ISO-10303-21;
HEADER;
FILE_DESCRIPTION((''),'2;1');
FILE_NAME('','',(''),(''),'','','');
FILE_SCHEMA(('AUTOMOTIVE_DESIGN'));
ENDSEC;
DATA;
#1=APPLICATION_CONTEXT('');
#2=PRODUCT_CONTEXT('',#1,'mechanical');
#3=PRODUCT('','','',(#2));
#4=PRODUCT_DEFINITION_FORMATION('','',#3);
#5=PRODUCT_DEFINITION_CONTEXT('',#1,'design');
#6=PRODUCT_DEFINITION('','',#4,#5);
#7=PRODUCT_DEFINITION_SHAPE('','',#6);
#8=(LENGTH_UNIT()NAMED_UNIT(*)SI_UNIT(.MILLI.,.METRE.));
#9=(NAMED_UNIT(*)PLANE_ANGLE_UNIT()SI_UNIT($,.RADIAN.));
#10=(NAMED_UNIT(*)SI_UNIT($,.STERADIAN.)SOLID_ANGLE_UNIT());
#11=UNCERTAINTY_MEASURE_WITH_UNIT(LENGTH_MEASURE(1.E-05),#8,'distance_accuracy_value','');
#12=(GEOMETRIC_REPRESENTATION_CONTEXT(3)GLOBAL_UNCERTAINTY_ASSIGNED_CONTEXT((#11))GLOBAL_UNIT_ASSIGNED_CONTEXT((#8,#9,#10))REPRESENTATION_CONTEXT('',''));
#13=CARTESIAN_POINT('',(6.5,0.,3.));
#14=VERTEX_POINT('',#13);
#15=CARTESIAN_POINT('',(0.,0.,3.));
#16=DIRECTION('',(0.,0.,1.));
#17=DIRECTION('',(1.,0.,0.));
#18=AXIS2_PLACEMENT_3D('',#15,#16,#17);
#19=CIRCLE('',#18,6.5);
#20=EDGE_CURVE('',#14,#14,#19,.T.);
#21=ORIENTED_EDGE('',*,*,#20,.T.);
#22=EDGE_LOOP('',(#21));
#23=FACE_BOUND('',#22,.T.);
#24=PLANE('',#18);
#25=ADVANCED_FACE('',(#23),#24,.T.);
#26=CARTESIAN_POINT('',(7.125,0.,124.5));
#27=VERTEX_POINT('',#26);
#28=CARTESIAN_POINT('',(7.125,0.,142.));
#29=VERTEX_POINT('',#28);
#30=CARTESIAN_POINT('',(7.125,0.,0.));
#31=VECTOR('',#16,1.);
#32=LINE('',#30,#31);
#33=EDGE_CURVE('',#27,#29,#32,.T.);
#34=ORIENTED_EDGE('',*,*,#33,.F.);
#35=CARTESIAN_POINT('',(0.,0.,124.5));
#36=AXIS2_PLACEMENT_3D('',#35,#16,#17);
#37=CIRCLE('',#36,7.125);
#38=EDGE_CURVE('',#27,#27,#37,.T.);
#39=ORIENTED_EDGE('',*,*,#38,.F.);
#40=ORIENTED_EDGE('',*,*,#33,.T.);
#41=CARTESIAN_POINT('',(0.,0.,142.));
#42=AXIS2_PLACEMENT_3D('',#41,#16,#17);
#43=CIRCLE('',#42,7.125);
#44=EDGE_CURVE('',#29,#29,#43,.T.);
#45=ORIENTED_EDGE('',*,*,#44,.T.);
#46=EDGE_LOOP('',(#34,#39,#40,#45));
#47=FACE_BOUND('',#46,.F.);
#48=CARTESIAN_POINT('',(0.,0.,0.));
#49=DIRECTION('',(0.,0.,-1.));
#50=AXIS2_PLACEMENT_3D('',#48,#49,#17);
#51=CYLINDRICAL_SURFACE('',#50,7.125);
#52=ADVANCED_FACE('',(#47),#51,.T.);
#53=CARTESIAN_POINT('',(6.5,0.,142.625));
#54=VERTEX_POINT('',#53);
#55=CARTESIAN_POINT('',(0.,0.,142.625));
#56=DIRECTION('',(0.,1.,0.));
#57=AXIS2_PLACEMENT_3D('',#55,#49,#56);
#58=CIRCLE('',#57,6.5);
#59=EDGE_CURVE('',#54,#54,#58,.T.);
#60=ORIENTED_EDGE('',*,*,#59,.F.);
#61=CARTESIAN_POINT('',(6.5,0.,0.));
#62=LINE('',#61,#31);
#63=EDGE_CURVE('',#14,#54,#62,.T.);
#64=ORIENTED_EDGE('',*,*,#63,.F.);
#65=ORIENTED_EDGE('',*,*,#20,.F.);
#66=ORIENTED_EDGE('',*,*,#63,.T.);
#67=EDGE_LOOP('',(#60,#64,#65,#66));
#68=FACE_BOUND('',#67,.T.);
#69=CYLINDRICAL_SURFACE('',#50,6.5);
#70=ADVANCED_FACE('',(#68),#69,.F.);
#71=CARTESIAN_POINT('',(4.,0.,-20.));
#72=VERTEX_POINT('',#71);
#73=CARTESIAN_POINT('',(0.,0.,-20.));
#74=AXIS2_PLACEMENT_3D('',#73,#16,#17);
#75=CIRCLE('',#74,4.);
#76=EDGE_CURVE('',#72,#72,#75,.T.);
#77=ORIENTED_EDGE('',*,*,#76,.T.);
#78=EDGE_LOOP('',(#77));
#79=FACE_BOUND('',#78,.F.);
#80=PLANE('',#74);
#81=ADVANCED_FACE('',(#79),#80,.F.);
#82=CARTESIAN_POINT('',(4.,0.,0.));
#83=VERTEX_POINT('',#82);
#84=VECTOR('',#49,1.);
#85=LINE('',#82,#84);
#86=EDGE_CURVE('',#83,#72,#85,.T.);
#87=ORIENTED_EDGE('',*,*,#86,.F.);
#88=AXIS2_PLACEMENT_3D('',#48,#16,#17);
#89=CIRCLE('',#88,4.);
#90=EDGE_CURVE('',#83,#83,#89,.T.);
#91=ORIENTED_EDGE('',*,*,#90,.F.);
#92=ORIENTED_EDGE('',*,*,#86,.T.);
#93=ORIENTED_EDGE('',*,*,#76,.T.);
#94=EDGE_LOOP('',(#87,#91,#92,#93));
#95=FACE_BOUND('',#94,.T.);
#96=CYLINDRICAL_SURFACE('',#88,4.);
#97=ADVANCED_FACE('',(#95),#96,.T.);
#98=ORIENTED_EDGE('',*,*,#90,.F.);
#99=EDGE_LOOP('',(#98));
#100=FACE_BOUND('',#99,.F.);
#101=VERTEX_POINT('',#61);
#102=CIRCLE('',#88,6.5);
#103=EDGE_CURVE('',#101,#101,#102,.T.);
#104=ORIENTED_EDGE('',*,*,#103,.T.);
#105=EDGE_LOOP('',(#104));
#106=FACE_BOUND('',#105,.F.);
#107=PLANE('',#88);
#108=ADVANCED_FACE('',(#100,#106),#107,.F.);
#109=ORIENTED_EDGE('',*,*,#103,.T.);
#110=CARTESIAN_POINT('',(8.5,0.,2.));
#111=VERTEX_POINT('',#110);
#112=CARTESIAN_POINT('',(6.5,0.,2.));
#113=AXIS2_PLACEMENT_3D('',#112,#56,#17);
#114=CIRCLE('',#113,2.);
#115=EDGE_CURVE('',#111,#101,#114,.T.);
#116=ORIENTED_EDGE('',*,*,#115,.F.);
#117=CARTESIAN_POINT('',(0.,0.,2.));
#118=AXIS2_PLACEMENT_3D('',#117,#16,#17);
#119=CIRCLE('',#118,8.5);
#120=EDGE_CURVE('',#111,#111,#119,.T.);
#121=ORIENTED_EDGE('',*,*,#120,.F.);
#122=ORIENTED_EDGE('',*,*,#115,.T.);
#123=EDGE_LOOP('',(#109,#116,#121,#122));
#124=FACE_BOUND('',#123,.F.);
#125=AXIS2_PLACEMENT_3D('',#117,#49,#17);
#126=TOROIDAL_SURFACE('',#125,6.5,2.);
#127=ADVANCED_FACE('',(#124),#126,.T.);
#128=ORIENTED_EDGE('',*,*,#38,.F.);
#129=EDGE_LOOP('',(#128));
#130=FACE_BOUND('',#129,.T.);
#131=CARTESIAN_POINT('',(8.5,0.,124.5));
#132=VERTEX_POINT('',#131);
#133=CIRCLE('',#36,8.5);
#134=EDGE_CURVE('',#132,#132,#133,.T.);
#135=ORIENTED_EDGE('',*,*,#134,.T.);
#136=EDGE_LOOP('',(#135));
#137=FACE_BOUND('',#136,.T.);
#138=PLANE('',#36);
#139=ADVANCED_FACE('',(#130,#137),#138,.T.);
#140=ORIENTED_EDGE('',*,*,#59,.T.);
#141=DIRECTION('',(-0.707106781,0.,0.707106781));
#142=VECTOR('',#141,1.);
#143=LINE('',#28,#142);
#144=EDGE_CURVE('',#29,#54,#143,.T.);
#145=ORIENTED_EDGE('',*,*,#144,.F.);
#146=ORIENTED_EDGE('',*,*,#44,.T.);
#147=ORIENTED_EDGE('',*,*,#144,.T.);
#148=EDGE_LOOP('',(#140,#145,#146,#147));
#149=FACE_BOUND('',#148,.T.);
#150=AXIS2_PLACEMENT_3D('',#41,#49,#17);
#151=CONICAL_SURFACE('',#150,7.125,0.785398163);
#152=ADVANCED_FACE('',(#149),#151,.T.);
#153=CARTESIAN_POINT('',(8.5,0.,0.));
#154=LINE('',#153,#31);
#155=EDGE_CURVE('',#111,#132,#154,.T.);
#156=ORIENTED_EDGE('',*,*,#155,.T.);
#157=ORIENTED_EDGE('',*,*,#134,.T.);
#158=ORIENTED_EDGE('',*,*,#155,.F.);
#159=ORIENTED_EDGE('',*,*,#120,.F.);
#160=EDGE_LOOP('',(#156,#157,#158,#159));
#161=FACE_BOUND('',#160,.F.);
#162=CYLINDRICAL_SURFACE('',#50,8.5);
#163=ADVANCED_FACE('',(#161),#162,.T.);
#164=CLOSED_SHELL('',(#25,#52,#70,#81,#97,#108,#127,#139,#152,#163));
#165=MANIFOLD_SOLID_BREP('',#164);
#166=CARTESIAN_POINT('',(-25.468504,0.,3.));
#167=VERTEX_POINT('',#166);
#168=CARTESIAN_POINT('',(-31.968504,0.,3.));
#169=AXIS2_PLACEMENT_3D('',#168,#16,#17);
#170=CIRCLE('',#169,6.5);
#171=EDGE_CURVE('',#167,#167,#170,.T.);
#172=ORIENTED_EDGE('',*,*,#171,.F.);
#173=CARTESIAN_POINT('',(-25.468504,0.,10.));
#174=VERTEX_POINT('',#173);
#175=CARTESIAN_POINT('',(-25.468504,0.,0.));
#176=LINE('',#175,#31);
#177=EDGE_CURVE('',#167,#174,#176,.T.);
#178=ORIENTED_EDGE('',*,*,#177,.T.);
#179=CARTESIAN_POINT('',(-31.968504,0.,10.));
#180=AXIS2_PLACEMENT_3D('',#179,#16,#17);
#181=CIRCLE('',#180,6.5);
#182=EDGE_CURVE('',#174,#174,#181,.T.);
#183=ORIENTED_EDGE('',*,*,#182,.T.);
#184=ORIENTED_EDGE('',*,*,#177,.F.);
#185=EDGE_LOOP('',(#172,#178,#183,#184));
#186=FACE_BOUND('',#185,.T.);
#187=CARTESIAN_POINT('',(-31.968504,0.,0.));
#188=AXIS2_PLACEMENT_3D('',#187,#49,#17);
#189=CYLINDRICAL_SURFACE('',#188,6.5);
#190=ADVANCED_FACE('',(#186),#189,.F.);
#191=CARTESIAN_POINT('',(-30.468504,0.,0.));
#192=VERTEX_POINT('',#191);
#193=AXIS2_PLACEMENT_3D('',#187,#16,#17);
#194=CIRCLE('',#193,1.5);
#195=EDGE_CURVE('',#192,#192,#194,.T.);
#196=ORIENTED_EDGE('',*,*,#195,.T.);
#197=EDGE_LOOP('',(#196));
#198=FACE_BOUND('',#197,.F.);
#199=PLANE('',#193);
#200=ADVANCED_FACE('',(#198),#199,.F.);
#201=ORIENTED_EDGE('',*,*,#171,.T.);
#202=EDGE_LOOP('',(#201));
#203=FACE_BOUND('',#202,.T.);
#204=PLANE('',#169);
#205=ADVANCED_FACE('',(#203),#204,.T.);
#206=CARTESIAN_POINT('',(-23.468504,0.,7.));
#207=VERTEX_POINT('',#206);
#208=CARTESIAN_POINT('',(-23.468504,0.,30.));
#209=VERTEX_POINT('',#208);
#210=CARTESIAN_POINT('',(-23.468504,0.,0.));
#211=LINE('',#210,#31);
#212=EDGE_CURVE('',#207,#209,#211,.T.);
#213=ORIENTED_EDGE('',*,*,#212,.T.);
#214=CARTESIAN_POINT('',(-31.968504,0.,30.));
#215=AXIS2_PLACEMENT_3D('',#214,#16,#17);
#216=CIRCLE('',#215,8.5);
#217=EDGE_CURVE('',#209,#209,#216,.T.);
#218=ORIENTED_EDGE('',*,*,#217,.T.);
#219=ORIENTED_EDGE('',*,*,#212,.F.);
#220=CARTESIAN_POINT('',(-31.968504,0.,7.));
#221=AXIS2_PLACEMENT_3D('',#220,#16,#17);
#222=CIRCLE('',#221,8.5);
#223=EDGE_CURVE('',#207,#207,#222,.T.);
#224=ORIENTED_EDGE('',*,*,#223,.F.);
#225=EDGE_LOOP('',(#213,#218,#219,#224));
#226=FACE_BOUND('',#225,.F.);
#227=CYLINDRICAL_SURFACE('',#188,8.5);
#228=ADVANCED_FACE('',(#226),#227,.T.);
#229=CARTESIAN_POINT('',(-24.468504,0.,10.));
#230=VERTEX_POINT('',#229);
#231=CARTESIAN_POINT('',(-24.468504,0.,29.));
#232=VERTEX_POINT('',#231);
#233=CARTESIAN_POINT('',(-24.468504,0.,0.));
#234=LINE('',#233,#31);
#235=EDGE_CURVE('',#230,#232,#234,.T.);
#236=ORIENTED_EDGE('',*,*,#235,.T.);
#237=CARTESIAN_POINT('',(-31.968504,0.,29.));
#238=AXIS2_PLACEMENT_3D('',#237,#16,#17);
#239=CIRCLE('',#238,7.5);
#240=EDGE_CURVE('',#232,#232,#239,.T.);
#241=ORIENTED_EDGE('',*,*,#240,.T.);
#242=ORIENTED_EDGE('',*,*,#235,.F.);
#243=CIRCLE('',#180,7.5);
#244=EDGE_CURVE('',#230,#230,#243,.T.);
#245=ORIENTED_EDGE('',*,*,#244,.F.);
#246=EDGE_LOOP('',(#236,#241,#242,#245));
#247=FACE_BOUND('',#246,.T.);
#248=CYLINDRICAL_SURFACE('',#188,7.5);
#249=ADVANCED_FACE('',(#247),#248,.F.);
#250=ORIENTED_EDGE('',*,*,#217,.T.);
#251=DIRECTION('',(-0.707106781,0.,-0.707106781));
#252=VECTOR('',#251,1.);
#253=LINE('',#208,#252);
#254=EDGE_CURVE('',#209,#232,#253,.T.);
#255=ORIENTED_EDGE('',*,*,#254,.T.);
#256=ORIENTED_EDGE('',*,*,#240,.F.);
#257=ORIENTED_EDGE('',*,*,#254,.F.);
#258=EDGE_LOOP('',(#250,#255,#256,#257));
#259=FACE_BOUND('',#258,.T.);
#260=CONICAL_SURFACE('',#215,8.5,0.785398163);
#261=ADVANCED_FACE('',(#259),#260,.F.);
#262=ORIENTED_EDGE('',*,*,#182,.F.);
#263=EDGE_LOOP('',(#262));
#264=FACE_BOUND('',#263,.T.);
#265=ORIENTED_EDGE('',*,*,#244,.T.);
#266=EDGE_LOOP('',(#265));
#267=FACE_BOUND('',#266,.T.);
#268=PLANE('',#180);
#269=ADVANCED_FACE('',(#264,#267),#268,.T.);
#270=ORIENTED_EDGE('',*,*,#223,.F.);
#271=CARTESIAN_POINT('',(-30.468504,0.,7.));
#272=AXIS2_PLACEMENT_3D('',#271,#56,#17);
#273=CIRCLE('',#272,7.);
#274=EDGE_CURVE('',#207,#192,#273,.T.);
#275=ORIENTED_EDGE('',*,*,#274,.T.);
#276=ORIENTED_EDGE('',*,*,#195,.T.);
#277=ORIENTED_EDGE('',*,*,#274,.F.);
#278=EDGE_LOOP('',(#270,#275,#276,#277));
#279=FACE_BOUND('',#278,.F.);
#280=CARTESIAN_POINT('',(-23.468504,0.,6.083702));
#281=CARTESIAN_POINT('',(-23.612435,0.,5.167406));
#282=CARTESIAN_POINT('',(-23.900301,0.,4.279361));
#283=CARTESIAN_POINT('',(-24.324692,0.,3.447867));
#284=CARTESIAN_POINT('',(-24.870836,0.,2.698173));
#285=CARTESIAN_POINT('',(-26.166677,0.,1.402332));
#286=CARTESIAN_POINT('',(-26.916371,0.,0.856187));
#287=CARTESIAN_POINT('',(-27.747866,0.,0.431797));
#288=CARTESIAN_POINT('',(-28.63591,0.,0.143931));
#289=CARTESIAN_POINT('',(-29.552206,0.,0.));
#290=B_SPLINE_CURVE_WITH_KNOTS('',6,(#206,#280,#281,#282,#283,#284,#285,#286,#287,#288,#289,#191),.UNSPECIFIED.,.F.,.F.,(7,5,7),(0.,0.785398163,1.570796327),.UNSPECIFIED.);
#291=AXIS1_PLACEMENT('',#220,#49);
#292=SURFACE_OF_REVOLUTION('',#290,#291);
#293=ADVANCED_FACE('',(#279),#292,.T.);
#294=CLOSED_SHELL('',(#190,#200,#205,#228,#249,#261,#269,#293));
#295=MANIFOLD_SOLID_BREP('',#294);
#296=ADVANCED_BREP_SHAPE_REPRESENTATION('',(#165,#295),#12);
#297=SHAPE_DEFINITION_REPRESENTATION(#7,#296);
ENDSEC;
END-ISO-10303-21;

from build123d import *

# Parameters (mm, degrees)
F0_R     = 6.5
F0_R_2   = 4
F1_DEPTH = 3
F0_R_3   = 7.5
F2_DEPTH = 10
F0_R_4   = 8.5
F3_DEPTH = 30
F0_R_5   = 7.125
F4_DEPTH = 143
F5_DEPTH = 124.5
F6_R     = 7
F7_R     = 2
F9_DEPTH = 20


# Not quite as in the source:
# - a fillet or chamfer that OpenCascade refuses, or shapes differently, is made with other operations: its cross-section is extruded or revolved along the edge and cut away or added


with BuildPart() as f1:
    # F0 (on Top) → F1 (new body)
    with BuildSketch(Plane.XY):
        Circle(F0_R)
        Circle(F0_R_2, mode=Mode.SUBTRACT)
        Circle(F0_R_2)
    extrude(amount=F1_DEPTH)

    # F0 (on Top) → F4 (join)
    with BuildSketch(Plane.XY):
        Circle(F0_R_5)
        Circle(F0_R, mode=Mode.SUBTRACT)
    extrude(amount=F4_DEPTH)

    # F0 (on Top) → F5 (join)
    with BuildSketch(Plane.XY):
        Circle(F0_R_4)
        Circle(F0_R_5, mode=Mode.SUBTRACT)
    extrude(amount=F5_DEPTH)

    # F7
    f7_edges = [f1.edges().sort_by_distance(p)[0] for p in [
        (-8.5, 0, 0),
    ]]
    fillet(f7_edges, radius=F7_R)

    # F8: chamfer of 1 on 1 edges, made by hand

    # F8_s1 → F8_t2 (revolve, cut)
    with BuildSketch(Plane.XZ):
        Polygon((7.125, 142), (6.125, 143), (7.125, 143), align=None)
    revolve(axis=Axis((0, 0, 143), (0, 0, 1)), mode=Mode.SUBTRACT)

    # F0 (on Top) → F9 (join)
    with BuildSketch(Plane.XY):
        Circle(F0_R_2)
    extrude(amount=-F9_DEPTH)


with BuildPart() as f1b:
    # F0 (on Top) → F1, piece 2 (new body)
    with BuildSketch(Plane.XY):
        with Locations((-31.9685041904, 0)):
            Circle(F0_R)
    extrude(amount=F1_DEPTH)

    # F0 (on Top) → F2 (join)
    with BuildSketch(Plane.XY):
        with Locations((-31.9685041904, 0)):
            Circle(F0_R_3)
        with Locations((-31.9685041904, 0)):
            Circle(F0_R, mode=Mode.SUBTRACT)
    extrude(amount=F2_DEPTH)

    # F0 (on Top) → F3 (join)
    with BuildSketch(Plane.XY):
        with Locations((-31.9685041904, 0)):
            Circle(F0_R_4)
        with Locations((-31.9685041904, 0)):
            Circle(F0_R_3, mode=Mode.SUBTRACT)
    extrude(amount=F3_DEPTH)

    # F6
    f6_edges = [f1b.edges().sort_by_distance(p)[0] for p in [
        (-40.468504, 0, 0),
    ]]
    fillet(f6_edges, radius=F6_R)

    # F8#2: chamfer of 1 on 1 edges, made by hand

    # F8_2_s1 → F8_2_t2 (revolve, cut)
    with BuildSketch(Plane.XZ):
        Polygon((-23.4685041904, 30), (-24.4685041904, 29), (-24.4685041904, 30), align=None)
    revolve(axis=Axis((-31.9685041904, 0, 30), (0, 0, 1)), mode=Mode.SUBTRACT)


solid = Compound([f1.part, f1b.part])
